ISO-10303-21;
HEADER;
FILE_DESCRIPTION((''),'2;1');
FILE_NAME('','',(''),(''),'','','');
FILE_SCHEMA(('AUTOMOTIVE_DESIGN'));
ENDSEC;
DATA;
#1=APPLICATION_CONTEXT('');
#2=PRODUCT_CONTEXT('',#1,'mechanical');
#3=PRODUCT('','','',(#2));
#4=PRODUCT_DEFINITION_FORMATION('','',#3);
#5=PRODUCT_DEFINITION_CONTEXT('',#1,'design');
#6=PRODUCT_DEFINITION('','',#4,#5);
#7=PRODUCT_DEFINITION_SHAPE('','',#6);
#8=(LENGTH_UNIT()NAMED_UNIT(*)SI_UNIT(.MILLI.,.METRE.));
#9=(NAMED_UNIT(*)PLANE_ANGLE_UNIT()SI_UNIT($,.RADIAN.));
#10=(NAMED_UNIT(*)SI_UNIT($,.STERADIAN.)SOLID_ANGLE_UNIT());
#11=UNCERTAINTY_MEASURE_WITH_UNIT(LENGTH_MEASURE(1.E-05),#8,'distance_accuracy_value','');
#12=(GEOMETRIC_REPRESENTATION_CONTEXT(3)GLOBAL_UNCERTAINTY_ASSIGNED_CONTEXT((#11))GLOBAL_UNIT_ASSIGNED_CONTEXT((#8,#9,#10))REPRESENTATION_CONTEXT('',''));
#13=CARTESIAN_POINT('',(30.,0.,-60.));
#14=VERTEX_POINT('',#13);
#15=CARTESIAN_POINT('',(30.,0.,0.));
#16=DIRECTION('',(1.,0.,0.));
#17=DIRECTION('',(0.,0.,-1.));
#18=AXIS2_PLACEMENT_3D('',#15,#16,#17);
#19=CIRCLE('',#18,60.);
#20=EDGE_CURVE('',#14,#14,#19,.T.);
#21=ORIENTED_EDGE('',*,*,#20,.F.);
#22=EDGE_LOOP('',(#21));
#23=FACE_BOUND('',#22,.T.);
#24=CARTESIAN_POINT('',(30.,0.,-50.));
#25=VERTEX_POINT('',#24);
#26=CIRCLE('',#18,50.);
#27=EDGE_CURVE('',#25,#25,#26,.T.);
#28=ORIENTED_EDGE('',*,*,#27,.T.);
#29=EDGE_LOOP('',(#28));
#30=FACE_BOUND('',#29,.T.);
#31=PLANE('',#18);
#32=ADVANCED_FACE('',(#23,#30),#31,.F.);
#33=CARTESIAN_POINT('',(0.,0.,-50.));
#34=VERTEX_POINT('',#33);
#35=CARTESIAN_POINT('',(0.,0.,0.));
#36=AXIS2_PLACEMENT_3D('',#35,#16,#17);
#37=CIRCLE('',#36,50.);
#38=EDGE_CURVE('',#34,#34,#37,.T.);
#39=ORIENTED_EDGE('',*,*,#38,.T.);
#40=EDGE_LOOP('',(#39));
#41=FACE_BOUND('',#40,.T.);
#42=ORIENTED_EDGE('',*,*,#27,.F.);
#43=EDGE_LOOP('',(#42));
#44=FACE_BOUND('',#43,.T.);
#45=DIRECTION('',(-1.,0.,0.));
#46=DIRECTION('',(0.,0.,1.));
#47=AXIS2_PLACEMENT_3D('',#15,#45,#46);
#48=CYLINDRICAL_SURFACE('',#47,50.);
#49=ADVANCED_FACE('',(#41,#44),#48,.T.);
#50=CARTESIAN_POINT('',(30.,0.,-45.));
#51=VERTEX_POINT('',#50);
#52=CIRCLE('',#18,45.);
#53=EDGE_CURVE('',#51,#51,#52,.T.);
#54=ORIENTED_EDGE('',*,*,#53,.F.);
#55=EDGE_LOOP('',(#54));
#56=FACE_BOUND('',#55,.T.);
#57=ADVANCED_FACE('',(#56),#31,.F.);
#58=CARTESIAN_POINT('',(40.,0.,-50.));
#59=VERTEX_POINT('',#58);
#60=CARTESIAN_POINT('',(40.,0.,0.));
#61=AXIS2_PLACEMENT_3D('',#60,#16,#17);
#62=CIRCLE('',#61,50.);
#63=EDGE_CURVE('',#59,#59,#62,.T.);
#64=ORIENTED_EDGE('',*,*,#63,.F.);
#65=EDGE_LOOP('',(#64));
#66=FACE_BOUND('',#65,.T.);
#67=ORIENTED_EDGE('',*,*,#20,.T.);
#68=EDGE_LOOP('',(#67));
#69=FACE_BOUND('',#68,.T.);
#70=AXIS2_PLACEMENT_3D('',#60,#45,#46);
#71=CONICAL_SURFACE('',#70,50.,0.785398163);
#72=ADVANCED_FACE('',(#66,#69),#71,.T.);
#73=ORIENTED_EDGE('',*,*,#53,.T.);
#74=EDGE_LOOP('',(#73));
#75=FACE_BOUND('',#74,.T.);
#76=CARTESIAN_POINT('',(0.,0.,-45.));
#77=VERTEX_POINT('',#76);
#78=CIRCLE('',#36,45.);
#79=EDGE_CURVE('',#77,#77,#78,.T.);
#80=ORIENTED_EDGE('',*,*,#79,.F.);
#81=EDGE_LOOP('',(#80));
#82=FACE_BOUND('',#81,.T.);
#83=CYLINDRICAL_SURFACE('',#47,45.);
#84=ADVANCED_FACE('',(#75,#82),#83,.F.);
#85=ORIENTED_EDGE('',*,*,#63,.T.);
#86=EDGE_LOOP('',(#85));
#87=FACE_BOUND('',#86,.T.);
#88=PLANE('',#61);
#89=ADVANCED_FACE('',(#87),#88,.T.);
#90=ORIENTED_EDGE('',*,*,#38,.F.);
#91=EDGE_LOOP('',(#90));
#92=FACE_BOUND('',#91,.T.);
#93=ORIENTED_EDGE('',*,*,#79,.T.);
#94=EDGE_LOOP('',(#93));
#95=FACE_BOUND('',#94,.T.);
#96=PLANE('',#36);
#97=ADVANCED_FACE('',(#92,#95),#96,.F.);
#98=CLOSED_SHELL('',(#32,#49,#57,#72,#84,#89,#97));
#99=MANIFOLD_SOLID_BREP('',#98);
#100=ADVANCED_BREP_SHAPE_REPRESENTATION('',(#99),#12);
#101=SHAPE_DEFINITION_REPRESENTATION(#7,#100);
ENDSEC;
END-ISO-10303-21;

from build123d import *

# Parameters (mm, degrees)
SKETCH_1_R      = 50
SKETCH_1_R_2    = 45
EXTRUDE_1_DEPTH = 30
SKETCH_2_R      = 60
EXTRUDE_2_DEPTH = 10
CHAMFER_1_SIZE  = 10


with BuildPart() as part:
    # Эскиз1 → Бобышка-Вытянуть1 (new body)
    with BuildSketch(Plane(origin=(0, 0, 0), x_dir=(0, 0, -1), z_dir=(1, 0, 0))):
        Circle(SKETCH_1_R)
        Circle(SKETCH_1_R_2, mode=Mode.SUBTRACT)
    extrude(amount=EXTRUDE_1_DEPTH)

    # Эскиз2 → Бобышка-Вытянуть2 (add)
    with BuildSketch(Plane(origin=(30, 0, 0), x_dir=(0, 0, -1), z_dir=(1, 0, 0))):
        Circle(SKETCH_2_R)
    extrude(amount=EXTRUDE_2_DEPTH)

    # Фаска1
    chamfer_1_edges = [part.edges().sort_by_distance(p)[0] for p in [
        (40, 0, 60),
    ]]
    chamfer(chamfer_1_edges, length=CHAMFER_1_SIZE - 0.0001)  # a hair under: the kernel refuses the full size


solid = part.part
